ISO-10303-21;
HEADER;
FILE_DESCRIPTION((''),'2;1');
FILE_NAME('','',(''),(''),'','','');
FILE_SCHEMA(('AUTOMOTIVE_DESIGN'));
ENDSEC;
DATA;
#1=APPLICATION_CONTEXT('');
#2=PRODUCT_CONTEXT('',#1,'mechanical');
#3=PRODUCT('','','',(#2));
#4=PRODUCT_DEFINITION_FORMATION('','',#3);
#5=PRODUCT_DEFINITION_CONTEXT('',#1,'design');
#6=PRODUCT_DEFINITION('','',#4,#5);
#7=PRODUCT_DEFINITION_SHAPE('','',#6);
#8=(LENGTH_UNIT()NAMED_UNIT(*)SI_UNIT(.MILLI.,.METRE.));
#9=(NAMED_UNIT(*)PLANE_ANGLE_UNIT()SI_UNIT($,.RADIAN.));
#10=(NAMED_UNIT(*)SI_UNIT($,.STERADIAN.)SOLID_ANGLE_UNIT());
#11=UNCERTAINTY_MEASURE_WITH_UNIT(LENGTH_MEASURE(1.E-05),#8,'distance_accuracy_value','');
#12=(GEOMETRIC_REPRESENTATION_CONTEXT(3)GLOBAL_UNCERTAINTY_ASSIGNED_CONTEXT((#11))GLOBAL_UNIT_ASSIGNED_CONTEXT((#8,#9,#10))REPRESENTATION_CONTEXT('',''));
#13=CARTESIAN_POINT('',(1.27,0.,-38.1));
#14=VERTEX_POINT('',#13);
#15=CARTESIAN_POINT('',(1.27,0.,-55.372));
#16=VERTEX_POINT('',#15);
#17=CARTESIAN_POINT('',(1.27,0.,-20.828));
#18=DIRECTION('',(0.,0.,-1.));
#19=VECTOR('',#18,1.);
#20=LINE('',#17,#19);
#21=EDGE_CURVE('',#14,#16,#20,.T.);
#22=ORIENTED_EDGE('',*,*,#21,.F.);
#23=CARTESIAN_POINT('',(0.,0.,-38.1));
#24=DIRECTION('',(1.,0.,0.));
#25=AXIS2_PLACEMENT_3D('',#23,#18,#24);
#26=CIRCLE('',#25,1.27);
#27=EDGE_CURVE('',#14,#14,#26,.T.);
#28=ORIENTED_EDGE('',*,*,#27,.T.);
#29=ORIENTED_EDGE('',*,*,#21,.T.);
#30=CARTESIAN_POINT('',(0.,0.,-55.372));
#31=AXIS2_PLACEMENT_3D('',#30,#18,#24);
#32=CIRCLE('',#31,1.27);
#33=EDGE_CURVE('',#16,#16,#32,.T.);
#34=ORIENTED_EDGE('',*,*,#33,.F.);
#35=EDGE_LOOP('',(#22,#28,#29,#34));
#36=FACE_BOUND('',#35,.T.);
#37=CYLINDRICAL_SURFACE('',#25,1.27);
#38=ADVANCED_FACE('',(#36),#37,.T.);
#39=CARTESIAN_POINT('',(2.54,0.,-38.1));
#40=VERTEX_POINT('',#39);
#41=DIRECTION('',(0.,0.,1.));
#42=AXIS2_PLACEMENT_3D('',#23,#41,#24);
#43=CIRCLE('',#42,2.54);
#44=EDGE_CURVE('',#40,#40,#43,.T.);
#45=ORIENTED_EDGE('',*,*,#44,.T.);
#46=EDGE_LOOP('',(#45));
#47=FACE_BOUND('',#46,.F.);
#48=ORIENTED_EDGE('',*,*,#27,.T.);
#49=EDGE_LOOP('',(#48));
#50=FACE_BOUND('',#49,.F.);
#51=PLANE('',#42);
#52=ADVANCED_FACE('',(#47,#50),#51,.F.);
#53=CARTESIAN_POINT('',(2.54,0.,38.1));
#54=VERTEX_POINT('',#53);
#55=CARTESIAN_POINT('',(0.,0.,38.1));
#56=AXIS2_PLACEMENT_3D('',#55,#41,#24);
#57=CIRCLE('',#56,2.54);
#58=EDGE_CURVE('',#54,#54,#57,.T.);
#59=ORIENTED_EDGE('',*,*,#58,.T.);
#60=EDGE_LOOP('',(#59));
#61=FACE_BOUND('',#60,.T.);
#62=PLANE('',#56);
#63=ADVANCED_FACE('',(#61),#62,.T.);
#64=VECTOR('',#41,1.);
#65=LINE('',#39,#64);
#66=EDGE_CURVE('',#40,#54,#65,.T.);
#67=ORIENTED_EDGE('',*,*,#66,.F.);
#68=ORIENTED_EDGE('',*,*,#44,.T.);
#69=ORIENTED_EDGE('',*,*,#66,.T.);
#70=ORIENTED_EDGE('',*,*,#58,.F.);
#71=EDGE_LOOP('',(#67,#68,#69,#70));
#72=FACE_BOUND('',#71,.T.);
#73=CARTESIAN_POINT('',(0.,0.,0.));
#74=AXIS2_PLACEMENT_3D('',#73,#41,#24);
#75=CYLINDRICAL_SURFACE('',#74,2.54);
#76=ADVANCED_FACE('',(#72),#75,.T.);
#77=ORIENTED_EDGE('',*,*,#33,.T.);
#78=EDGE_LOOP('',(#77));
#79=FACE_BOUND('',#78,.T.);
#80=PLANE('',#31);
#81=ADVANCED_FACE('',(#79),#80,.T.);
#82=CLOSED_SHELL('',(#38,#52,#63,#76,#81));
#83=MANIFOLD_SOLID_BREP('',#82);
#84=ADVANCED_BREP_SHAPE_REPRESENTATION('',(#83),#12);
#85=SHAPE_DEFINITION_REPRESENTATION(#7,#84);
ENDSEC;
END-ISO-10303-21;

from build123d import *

# Parameters (mm, degrees)
F0_R     = 2.54
F1_DEPTH = 38.1
F2_R     = 1.27
F3_DEPTH = 17.272


# Not quite as in the source:
# - the program builds the solid bodies; features that only make, move or delete a surface that nothing else refers to are left out


with BuildPart() as f1:
    # F0 (on Top) → F1 (new body, symmetric)
    with BuildSketch(Plane.XY):
        Circle(F0_R)
    extrude(amount=F1_DEPTH, both=True)

    # F2 (on face) → F3 (join, symmetric)
    with BuildSketch(Plane(origin=(0, 0, -38.1), x_dir=(1, 0, 0), z_dir=(0, 0, -1))):
        Circle(F2_R)
    extrude(amount=F3_DEPTH, both=True)


solid = f1.part
